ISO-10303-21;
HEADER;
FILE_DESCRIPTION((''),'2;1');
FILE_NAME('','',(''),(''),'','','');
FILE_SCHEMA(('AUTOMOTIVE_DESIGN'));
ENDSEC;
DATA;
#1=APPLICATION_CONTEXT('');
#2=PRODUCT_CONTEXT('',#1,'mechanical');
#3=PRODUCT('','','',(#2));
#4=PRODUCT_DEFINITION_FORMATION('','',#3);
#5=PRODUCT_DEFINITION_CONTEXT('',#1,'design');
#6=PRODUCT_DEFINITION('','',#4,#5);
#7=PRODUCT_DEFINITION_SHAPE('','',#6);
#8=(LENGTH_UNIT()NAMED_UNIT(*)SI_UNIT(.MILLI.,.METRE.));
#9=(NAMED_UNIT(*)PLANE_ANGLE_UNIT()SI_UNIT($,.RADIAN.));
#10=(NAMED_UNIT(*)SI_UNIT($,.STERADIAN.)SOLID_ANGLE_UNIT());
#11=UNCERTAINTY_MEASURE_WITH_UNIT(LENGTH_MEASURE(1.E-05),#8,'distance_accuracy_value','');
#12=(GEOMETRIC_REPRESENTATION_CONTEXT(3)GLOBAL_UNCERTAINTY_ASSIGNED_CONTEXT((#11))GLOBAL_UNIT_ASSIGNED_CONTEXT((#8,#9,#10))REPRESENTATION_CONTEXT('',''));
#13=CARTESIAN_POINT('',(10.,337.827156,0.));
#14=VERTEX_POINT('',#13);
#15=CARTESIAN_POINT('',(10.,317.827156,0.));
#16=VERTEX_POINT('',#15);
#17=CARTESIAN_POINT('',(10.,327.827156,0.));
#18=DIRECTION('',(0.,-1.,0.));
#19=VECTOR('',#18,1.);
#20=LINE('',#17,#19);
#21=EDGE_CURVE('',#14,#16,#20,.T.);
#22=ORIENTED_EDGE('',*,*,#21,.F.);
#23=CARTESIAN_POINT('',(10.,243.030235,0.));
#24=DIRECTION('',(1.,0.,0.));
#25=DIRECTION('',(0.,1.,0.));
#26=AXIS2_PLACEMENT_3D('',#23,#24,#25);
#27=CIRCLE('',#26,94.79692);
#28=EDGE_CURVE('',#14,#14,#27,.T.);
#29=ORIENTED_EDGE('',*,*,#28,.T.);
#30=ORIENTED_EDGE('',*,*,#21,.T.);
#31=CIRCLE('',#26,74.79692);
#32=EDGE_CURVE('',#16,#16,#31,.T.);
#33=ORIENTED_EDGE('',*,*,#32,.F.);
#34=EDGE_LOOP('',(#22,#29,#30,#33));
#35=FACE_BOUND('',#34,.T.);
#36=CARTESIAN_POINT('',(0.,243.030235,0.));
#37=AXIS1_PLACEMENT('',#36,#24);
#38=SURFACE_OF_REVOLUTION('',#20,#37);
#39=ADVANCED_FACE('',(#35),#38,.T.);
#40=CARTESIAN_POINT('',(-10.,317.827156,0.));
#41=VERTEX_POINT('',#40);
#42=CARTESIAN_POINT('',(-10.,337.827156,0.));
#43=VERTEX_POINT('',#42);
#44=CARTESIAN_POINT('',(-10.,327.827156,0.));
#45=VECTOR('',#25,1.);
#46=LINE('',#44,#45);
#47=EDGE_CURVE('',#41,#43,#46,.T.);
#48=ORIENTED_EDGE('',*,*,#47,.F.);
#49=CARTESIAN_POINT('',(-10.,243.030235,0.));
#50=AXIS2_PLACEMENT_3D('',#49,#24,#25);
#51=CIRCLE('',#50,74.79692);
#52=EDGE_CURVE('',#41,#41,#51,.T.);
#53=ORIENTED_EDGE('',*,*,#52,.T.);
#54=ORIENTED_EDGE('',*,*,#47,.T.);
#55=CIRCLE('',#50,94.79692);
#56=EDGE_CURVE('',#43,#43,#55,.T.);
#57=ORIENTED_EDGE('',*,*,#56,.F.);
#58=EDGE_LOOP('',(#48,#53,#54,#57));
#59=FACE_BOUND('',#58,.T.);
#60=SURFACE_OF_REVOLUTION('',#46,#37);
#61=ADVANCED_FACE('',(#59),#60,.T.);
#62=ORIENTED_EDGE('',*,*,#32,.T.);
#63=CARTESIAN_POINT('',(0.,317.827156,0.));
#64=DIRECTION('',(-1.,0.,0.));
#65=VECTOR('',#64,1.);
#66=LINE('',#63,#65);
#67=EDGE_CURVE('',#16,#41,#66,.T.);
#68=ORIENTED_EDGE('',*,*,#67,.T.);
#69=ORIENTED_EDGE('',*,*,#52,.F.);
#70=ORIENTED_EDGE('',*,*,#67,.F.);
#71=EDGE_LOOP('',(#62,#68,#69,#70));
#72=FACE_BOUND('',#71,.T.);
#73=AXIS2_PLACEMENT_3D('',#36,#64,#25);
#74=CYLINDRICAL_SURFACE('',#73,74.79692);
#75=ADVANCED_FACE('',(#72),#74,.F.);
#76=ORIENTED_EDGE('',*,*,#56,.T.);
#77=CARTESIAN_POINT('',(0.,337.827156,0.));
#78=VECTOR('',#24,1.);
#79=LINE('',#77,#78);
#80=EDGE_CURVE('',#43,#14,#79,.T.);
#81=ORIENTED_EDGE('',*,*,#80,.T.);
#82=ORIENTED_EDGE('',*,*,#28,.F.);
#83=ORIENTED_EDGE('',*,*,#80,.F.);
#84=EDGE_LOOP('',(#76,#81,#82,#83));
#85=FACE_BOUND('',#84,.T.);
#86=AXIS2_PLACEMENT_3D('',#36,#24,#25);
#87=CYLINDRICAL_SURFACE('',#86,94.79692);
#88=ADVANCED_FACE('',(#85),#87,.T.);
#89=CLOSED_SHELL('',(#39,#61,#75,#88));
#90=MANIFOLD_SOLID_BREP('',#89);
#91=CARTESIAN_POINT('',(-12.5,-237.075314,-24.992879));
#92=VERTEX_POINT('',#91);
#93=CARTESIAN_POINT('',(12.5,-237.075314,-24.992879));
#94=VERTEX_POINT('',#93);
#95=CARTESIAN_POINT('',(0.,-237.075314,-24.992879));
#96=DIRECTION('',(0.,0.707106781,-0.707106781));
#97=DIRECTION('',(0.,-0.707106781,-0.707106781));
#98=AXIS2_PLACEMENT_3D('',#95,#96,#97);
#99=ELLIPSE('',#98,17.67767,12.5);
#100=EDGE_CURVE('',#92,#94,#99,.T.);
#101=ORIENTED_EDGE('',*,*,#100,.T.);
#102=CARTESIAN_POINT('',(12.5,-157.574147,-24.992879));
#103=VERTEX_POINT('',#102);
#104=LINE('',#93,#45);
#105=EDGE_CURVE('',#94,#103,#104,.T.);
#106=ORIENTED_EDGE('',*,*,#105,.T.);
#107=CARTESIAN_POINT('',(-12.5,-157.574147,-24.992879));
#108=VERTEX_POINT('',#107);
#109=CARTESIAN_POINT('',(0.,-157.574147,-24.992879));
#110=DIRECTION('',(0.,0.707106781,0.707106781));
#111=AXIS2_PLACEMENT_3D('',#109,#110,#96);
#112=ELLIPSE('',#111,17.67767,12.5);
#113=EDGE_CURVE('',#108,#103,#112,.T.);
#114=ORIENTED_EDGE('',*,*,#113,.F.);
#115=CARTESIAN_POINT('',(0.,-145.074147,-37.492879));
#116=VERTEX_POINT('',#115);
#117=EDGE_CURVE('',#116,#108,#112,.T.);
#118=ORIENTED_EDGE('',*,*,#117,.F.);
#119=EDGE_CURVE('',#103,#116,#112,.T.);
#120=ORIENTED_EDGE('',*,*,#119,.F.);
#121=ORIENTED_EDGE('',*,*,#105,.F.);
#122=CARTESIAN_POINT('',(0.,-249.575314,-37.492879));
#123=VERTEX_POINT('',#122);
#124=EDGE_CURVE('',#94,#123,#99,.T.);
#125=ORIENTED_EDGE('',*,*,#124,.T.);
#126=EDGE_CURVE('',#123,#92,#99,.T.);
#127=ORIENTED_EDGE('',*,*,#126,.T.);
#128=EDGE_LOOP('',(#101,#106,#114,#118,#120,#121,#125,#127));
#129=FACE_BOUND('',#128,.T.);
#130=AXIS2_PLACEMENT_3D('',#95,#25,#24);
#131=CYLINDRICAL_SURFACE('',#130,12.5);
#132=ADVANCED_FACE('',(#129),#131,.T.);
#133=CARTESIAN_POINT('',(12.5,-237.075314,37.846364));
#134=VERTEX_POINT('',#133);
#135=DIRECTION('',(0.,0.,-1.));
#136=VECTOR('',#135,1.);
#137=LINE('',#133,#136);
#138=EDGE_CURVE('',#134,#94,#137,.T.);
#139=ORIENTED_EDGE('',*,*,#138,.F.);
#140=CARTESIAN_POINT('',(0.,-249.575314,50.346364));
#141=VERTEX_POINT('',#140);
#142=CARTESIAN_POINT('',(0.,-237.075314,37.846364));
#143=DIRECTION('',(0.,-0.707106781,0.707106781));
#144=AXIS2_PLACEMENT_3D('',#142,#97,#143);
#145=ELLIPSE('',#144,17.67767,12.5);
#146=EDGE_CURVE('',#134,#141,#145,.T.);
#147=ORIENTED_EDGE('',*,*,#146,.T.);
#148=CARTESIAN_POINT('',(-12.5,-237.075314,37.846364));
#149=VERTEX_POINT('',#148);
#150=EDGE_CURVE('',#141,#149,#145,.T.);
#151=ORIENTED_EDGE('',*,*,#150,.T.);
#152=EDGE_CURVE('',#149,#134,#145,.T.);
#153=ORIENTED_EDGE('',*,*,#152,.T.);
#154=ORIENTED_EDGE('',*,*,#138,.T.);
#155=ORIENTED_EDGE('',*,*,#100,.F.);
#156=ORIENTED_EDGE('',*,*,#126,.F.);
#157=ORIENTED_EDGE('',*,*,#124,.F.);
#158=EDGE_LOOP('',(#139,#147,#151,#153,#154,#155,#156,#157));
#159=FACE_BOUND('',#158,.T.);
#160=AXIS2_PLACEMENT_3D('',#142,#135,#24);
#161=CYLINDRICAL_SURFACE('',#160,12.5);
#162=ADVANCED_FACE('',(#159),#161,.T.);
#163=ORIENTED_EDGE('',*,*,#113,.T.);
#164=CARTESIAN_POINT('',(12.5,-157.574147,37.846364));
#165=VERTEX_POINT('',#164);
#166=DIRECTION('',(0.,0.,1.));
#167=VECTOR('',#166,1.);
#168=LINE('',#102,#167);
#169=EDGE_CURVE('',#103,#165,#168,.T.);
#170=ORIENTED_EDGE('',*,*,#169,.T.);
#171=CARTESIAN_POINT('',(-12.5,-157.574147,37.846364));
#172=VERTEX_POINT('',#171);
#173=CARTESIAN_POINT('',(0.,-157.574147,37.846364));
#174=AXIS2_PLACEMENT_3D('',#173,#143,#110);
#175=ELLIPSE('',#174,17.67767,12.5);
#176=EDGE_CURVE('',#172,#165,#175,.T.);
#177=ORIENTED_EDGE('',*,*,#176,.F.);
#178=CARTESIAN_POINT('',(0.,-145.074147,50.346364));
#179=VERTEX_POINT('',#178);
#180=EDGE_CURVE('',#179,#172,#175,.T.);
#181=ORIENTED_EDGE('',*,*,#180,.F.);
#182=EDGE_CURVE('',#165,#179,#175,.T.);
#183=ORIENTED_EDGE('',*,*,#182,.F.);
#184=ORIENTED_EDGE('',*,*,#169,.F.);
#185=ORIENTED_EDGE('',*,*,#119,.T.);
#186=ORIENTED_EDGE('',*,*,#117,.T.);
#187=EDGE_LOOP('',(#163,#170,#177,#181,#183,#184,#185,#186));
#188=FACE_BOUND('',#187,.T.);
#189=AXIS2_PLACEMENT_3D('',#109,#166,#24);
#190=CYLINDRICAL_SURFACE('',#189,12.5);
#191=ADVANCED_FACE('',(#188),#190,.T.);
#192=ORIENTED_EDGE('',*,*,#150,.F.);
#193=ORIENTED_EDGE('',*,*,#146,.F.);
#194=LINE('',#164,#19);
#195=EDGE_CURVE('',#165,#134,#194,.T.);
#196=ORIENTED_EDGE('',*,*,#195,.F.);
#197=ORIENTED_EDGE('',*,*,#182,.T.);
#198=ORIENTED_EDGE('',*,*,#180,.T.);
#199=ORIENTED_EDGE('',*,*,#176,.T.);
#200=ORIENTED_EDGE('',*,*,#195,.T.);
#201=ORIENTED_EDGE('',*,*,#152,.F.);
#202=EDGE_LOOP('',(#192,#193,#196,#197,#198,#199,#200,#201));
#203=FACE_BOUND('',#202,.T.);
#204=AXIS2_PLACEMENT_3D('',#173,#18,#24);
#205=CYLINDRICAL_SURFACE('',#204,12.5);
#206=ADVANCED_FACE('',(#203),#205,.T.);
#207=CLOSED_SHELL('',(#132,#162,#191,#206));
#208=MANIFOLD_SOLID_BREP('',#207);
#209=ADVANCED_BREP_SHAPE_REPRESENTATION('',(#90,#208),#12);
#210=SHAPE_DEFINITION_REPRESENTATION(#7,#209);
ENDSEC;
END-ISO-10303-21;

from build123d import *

# Parameters (mm, degrees)
F5_R = 12.5
F8_W = 20
F8_H = 20


# Not quite as in the source:
# - the program builds the solid bodies; features that only make, move or delete a surface that nothing else refers to are left out


with BuildPart() as f6:
    # F6: sweep along a path in F4
    with BuildLine(Plane.YZ) as f6_path:
        Line((-237.0753139257, 37.8463640809), (-237.0753139257, -24.9928794801))
        Line((-237.0753139257, -24.9928794801), (-157.574146986, -24.9928794801))
        Line((-157.574146986, -24.9928794801), (-157.574146986, 37.8463640809))
        Line((-157.574146986, 37.8463640809), (-237.0753139257, 37.8463640809))
    # F5 (on Top) → F6 (sweep)
    with BuildSketch(Plane.XY):
        with Locations((0, -237.0753139257)):
            Circle(F5_R)
    sweep(path=f6_path.line, transition=Transition.RIGHT)


with BuildPart() as f9:
    # F9: sweep along a path in F7
    with BuildLine(Plane.YZ) as f9_path:
        CenterArc((243.0302351713, 0), 50, 0, 360)
    # F8 (on Top) → F9 (sweep)
    with BuildSketch(Plane.XY):
        with Locations((0, 158.2333147526)):
            Rectangle(F8_W, F8_H)
    sweep(path=f9_path.line)


solid = Compound([f6.part, f9.part])
